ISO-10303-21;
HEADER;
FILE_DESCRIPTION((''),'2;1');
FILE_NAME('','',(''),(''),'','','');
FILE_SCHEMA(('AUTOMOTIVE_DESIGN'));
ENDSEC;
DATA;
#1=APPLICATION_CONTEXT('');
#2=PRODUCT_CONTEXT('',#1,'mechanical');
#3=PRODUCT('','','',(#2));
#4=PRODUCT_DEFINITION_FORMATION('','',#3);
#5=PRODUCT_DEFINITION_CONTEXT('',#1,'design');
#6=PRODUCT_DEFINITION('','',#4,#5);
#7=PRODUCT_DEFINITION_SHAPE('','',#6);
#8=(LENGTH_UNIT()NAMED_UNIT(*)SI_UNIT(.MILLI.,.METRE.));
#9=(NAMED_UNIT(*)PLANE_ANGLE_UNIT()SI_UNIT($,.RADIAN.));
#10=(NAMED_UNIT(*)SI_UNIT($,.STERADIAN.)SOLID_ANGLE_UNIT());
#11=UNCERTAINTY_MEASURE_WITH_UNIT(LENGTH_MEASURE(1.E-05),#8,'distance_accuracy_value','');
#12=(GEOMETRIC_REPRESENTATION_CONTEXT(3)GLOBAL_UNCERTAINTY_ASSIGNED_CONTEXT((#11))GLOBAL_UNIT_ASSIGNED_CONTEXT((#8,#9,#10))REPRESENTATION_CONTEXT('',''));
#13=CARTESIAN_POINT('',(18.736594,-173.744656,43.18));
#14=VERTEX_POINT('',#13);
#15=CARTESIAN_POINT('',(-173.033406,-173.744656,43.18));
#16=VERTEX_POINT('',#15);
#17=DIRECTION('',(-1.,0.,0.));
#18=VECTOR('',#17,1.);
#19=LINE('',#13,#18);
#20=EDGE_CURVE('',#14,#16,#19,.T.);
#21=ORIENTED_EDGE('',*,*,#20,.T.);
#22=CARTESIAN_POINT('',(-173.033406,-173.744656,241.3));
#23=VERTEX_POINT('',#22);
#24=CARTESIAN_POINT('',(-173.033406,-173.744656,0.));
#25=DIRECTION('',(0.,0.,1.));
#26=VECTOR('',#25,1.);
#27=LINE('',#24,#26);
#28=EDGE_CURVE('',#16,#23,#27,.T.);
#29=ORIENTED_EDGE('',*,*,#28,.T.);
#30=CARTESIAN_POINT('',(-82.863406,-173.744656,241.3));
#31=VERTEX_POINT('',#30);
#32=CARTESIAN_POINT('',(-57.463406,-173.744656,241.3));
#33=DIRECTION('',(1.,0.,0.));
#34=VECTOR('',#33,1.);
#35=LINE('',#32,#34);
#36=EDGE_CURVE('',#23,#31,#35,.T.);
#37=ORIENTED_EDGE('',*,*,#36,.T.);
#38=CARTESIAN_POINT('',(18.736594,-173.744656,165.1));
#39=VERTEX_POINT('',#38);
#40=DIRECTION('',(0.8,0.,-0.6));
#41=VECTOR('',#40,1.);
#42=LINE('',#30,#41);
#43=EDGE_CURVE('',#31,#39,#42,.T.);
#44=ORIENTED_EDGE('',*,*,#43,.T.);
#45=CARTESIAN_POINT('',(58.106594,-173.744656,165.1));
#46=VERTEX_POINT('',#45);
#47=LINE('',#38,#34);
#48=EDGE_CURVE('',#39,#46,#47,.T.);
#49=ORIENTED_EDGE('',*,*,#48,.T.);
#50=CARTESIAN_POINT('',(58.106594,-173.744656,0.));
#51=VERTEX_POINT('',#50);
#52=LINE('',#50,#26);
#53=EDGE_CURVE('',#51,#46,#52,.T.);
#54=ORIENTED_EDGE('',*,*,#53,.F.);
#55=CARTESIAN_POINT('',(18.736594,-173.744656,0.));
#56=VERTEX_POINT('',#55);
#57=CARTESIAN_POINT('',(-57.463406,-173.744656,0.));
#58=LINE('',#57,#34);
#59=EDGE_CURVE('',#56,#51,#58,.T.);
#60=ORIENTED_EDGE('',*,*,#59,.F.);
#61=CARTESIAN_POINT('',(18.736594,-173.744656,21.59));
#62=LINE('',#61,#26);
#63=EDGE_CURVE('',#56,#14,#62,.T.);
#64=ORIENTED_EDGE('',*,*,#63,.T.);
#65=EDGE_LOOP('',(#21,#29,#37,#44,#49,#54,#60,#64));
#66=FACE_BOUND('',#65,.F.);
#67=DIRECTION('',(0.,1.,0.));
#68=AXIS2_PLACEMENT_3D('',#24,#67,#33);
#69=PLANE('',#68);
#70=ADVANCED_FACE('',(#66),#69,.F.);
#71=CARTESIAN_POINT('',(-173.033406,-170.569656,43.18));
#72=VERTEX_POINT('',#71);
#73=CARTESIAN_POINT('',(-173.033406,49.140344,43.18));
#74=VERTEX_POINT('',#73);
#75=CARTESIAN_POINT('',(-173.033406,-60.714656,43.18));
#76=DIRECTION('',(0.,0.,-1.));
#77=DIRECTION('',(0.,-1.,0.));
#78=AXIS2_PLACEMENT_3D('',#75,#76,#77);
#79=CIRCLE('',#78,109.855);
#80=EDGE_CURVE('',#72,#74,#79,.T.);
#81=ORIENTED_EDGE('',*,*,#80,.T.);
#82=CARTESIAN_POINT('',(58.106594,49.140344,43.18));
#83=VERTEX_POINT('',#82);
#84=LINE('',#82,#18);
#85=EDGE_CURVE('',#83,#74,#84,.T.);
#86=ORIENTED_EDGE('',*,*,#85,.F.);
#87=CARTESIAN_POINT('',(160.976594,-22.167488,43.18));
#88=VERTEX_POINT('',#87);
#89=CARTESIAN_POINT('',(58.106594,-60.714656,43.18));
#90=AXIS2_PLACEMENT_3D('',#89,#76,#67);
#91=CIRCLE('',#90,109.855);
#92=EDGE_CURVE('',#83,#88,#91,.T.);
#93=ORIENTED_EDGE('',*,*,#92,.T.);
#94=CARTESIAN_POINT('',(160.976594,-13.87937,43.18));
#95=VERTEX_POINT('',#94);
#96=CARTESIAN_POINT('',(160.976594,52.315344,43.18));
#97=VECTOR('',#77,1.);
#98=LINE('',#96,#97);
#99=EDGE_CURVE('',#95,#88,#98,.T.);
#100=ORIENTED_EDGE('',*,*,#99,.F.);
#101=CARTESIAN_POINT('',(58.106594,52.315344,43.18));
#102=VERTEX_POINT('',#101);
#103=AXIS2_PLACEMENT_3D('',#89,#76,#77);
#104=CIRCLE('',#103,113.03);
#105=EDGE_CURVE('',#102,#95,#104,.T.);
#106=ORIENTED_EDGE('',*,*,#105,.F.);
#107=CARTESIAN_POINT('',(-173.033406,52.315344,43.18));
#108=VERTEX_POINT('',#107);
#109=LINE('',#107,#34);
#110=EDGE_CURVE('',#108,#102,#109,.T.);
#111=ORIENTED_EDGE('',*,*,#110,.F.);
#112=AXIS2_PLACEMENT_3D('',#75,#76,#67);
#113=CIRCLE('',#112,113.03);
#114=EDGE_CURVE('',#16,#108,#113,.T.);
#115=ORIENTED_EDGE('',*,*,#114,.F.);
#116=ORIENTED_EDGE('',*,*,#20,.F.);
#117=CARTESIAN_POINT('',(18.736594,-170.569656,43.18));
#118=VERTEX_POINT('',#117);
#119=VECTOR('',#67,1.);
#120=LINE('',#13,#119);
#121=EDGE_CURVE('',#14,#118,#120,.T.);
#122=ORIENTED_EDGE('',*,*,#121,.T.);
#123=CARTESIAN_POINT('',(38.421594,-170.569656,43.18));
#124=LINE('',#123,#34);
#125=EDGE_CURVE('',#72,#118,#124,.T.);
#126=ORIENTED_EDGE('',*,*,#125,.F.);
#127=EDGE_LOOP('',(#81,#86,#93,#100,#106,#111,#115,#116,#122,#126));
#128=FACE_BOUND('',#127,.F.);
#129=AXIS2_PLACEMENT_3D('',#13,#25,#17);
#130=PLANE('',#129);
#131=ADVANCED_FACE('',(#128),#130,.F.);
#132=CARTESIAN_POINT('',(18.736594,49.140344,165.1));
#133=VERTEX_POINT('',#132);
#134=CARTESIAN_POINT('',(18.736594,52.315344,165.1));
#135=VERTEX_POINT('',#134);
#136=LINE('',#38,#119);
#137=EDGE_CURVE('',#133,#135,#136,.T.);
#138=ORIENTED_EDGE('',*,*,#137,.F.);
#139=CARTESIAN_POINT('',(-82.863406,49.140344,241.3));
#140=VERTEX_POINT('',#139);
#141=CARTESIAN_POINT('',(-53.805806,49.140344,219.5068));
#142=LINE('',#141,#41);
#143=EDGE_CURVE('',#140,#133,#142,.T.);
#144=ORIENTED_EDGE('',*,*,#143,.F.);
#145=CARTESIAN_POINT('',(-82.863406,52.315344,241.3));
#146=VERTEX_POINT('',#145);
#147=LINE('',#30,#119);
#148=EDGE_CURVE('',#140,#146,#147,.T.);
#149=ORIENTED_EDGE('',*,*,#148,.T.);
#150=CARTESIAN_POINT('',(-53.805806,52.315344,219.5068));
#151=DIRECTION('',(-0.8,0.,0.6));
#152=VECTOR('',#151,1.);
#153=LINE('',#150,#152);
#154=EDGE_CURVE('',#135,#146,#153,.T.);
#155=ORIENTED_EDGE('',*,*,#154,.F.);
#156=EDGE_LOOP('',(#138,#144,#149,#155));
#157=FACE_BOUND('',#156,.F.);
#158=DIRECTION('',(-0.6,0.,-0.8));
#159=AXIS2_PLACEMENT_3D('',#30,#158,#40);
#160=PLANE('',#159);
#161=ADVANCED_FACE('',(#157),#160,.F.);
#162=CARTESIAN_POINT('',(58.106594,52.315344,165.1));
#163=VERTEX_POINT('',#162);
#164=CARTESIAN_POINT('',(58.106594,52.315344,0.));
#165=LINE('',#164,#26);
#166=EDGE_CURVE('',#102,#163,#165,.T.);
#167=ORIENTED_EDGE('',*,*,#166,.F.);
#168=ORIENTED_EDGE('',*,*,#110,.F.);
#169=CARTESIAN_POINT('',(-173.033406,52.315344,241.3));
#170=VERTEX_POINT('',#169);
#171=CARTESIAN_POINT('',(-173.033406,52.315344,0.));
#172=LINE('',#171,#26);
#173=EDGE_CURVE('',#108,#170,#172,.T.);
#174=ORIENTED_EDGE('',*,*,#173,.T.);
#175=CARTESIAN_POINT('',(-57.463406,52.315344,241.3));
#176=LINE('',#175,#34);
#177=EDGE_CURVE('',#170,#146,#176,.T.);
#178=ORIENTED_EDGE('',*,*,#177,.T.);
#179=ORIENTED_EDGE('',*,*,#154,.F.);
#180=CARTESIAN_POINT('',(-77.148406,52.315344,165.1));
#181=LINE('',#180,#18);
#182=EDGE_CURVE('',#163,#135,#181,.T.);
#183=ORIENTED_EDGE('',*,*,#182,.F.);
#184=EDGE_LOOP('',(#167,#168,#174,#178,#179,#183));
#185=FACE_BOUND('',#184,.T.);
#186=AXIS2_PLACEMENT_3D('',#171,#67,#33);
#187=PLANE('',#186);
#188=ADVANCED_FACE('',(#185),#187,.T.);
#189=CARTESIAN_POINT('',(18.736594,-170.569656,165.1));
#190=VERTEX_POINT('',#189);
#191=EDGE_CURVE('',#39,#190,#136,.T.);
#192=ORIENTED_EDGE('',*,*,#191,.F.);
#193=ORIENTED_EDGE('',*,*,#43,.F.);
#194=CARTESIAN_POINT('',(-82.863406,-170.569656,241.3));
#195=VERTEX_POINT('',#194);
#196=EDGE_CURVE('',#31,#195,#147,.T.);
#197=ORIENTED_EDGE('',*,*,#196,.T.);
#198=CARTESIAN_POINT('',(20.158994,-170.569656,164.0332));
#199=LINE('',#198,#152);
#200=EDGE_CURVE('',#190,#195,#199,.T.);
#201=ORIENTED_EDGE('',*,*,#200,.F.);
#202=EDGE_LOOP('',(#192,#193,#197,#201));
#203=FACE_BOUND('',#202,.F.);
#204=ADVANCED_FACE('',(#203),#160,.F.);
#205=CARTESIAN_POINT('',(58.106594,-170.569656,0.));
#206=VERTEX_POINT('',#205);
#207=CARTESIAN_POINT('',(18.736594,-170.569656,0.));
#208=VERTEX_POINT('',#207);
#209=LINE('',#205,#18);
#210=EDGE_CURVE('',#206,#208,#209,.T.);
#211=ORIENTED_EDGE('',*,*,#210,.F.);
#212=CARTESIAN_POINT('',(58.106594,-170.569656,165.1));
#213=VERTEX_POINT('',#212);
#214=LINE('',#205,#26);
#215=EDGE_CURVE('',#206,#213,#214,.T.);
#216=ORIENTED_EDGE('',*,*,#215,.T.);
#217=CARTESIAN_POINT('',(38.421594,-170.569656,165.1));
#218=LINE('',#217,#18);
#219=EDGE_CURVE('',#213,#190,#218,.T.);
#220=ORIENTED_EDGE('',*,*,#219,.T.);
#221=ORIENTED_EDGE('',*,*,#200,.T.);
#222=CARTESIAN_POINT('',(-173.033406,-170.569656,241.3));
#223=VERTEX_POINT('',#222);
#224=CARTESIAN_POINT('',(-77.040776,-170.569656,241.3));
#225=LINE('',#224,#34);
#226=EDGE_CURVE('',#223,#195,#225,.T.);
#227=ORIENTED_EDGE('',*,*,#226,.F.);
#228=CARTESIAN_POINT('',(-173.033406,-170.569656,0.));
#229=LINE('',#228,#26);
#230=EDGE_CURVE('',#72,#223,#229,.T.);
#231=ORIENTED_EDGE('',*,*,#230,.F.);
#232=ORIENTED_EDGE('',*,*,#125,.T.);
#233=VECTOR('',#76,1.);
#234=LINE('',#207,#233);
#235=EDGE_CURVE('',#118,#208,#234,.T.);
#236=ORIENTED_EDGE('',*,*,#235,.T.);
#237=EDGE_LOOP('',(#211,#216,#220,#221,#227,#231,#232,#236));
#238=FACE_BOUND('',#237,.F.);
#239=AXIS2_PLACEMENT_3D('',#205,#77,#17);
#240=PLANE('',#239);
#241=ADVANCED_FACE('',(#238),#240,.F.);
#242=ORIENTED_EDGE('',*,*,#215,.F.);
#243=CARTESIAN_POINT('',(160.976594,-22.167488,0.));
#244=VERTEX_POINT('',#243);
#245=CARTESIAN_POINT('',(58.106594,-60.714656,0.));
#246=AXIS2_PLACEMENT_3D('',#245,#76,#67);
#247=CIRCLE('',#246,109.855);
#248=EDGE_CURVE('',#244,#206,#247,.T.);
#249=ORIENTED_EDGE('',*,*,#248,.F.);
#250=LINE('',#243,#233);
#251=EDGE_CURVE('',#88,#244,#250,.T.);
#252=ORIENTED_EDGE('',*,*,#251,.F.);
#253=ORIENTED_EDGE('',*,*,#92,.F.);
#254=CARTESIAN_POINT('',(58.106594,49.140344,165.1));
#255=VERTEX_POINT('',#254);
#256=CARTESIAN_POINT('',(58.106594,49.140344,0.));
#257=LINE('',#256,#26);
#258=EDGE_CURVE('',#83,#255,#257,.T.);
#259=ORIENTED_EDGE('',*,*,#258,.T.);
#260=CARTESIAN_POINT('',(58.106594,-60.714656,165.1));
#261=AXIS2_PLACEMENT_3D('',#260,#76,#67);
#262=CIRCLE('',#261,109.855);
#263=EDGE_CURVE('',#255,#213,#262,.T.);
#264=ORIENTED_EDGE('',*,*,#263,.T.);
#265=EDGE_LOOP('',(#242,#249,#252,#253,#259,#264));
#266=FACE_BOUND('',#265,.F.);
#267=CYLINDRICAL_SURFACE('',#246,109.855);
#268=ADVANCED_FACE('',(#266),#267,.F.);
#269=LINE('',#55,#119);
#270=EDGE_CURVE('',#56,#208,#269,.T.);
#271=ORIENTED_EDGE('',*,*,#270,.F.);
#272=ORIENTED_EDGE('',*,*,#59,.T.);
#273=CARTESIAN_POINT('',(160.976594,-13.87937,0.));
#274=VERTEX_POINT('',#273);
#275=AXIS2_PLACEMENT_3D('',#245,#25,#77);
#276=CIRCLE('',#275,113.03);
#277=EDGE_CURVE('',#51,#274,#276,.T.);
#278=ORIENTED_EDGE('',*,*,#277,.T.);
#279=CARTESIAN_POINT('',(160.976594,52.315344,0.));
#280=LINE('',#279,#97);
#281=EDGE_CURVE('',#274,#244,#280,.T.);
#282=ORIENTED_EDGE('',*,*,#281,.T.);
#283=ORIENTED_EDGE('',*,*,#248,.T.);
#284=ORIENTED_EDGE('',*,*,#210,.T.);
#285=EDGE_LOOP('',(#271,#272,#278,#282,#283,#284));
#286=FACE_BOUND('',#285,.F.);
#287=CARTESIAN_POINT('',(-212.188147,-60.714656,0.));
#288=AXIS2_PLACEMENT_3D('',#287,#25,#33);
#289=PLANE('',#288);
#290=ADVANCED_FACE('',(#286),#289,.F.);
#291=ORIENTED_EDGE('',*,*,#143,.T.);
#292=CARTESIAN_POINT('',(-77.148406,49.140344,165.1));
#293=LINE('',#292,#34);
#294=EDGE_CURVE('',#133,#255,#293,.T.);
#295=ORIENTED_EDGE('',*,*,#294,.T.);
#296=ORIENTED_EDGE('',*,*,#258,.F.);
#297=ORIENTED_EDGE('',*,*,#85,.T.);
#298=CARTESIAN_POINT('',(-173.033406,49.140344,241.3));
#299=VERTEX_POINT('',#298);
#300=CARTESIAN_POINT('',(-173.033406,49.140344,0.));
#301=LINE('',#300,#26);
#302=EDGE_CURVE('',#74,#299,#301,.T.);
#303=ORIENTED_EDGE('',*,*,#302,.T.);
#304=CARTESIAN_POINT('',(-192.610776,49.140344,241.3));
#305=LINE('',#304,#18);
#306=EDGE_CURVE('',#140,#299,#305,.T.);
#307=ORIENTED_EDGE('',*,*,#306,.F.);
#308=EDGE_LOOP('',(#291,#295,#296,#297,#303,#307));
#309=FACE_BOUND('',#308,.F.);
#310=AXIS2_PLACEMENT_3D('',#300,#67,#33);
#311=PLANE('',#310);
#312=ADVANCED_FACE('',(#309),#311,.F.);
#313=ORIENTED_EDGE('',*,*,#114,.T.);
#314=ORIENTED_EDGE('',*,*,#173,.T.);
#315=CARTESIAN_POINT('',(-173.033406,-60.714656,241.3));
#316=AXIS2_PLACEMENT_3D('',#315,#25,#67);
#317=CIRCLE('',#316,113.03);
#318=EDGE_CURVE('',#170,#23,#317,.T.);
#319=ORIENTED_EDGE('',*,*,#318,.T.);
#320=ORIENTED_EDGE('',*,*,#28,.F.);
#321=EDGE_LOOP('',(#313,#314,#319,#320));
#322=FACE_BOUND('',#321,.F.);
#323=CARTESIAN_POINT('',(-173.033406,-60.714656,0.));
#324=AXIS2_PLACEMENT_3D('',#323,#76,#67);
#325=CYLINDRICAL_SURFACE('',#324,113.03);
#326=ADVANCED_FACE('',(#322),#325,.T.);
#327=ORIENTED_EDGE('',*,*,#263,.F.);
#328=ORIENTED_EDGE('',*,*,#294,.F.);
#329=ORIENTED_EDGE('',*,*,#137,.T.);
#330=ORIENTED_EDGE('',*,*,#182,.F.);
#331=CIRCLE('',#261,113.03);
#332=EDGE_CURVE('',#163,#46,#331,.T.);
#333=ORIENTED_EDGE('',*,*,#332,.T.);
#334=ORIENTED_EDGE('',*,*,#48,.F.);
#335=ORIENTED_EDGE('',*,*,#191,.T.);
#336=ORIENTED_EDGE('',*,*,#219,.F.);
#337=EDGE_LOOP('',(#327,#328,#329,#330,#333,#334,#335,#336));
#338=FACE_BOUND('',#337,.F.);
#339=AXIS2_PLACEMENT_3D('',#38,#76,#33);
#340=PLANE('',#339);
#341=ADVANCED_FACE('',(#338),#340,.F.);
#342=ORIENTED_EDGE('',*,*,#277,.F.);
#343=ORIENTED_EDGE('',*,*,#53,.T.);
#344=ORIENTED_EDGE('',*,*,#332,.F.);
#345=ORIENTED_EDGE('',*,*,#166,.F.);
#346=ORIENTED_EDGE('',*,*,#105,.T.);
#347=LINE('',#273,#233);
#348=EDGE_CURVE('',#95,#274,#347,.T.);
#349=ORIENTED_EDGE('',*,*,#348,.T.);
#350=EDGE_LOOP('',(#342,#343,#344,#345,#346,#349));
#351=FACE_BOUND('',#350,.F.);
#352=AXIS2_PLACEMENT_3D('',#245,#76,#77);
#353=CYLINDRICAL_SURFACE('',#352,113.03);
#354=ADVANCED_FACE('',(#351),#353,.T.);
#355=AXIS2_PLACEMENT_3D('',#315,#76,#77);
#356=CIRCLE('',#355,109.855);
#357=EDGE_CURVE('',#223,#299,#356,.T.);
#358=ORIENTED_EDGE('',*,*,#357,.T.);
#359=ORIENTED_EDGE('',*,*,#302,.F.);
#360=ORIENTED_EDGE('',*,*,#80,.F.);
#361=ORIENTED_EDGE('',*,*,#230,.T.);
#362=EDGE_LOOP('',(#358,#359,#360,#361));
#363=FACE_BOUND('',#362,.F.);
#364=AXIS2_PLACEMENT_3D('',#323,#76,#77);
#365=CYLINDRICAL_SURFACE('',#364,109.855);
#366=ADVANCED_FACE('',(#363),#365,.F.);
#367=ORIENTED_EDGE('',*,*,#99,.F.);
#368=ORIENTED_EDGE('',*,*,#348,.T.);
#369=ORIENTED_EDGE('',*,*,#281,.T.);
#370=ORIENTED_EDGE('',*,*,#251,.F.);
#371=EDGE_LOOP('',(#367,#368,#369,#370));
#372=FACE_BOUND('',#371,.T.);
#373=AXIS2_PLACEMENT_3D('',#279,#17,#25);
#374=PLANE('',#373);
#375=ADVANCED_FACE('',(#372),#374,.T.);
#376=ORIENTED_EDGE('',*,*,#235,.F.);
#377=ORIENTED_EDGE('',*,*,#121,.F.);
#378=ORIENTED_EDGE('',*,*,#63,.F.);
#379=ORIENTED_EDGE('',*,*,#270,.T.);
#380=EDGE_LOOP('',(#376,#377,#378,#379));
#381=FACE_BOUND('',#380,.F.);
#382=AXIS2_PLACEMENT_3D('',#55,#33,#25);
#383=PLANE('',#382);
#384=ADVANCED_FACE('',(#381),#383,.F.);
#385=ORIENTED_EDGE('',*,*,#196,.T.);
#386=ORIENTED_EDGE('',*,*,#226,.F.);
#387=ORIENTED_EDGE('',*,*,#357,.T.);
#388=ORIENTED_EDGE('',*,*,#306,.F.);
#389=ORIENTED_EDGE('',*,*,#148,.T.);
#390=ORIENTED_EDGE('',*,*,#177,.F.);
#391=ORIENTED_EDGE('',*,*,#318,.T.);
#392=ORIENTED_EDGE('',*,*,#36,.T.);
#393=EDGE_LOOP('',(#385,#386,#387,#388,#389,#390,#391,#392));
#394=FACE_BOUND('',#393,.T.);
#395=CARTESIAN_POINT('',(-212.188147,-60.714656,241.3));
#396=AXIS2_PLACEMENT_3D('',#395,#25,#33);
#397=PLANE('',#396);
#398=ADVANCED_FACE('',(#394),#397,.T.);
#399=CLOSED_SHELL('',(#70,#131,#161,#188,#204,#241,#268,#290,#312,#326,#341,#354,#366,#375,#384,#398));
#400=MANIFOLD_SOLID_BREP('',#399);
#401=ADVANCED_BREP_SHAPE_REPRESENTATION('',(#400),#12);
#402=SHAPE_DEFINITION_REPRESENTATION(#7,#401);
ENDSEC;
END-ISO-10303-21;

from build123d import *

# Parameters (mm, degrees)
F0_W     = 231.14
F0_H     = 226.06
F1_DEPTH = 241.3
F2_W     = 113.03
F2_H     = 76.2
F2_W_2   = 39.37
F2_W_3   = 150.0068409762
F2_H_2   = 43.18
F2_W_4   = 191.77
F3_DEPTH = 226.061
F6_DEPTH = 241.301
F4_W     = 102.87
F4_H     = 43.18
F4_W_2   = 39.37
F7_DEPTH = 114.046


# Not quite as in the source:
# - a feature names something its author has since deleted; it is built from what else it names


with BuildPart() as f1:
    # F0 (on Top) → F1 (new body)
    with BuildSketch(Plane.XY):
        with BuildLine():
            Line((-173.0334059873, -173.7446556775), (-173.0334059873, 52.3153443225))
            ThreePointArc((-173.0334059873, 52.3153443225), (-286.0634059873, -60.7146556775), (-173.0334059873, -173.7446556775))
        make_face()
        with Locations((-57.4634059873, -60.7146556775)):
            Rectangle(F0_W, F0_H)
        with BuildLine():
            ThreePointArc((58.1065940127, -173.7446556775), (171.1365940127, -60.7146556775), (58.1065940127, 52.3153443225))
            Line((58.1065940127, 52.3153443225), (58.1065940127, -173.7446556775))
        make_face()
    extrude(amount=F1_DEPTH)

    # F2 (on face) → F3 (cut, through all)
    with BuildSketch(Plane.XZ.offset(173.7446556775)):
        Polygon((18.7365940127, 241.3), (-82.8634059873, 241.3), (18.7365940127, 165.1), align=None)
        with Locations((114.6215940127, 203.2)):
            Rectangle(F2_W, F2_H)
        with Locations((38.4215940127, 203.2)):
            Rectangle(F2_W_2, F2_H)
        with Locations((-248.0368264754, 21.59)):
            Rectangle(F2_W_3, F2_H_2)
        with Locations((-77.1484059873, 21.59)):
            Rectangle(F2_W_4, F2_H_2)
    extrude(amount=-F3_DEPTH, mode=Mode.SUBTRACT)

    # F5 (on face) → F6 (cut, through all)
    with BuildSketch(Plane(origin=(0, 0, 0), x_dir=(1, 0, 0), z_dir=(0, 0, -1))):
        with BuildLine():
            ThreePointArc((-173.0334059873, 170.5696556775), (-282.8884059873, 60.7146556775), (-173.0334059873, -49.1403443225))
            Line((-173.0334059873, -49.1403443225), (3.4965941633, -49.1403443225))
            Line((3.4965941633, -49.1403443225), (18.7365940127, -49.1403443225))
            Line((18.7365940127, -49.1403443225), (18.7365940127, 170.5696556775))
            Line((18.7365940127, 170.5696556775), (3.4965941633, 170.5696556775))
            Line((3.4965941633, 170.5696556775), (-173.0334059873, 170.5696556775))
        make_face()
        with BuildLine():
            Line((18.7365940127, 170.5696556775), (18.7365940127, -49.1403443225))
            Line((18.7365940127, -49.1403443225), (21.9115940127, -49.1403443225))
            Line((21.9115940127, -49.1403443225), (58.1065940127, -49.1403443225))
            ThreePointArc((58.1065940127, -49.1403443225), (167.9615940127, 60.7146556775), (58.1065940127, 170.5696556775))
            Line((58.1065940127, 170.5696556775), (21.9115940127, 170.5696556775))
            Line((21.9115940127, 170.5696556775), (18.7365940127, 170.5696556775))
        make_face()
    extrude(amount=-F6_DEPTH, mode=Mode.SUBTRACT)

    # F4 (on face) → F7 (cut)
    with BuildSketch(Plane(origin=(0, 52.3153443225, 0), x_dir=(-1, 0, 0), z_dir=(0, 1, 0))):
        with Locations((-109.5415940127, 21.59)):
            Rectangle(F4_W, F4_H)
        with Locations((-38.4215940127, 21.59)):
            Rectangle(F4_W_2, F4_H)
    extrude(amount=-F7_DEPTH, mode=Mode.SUBTRACT)


solid = f1.part
